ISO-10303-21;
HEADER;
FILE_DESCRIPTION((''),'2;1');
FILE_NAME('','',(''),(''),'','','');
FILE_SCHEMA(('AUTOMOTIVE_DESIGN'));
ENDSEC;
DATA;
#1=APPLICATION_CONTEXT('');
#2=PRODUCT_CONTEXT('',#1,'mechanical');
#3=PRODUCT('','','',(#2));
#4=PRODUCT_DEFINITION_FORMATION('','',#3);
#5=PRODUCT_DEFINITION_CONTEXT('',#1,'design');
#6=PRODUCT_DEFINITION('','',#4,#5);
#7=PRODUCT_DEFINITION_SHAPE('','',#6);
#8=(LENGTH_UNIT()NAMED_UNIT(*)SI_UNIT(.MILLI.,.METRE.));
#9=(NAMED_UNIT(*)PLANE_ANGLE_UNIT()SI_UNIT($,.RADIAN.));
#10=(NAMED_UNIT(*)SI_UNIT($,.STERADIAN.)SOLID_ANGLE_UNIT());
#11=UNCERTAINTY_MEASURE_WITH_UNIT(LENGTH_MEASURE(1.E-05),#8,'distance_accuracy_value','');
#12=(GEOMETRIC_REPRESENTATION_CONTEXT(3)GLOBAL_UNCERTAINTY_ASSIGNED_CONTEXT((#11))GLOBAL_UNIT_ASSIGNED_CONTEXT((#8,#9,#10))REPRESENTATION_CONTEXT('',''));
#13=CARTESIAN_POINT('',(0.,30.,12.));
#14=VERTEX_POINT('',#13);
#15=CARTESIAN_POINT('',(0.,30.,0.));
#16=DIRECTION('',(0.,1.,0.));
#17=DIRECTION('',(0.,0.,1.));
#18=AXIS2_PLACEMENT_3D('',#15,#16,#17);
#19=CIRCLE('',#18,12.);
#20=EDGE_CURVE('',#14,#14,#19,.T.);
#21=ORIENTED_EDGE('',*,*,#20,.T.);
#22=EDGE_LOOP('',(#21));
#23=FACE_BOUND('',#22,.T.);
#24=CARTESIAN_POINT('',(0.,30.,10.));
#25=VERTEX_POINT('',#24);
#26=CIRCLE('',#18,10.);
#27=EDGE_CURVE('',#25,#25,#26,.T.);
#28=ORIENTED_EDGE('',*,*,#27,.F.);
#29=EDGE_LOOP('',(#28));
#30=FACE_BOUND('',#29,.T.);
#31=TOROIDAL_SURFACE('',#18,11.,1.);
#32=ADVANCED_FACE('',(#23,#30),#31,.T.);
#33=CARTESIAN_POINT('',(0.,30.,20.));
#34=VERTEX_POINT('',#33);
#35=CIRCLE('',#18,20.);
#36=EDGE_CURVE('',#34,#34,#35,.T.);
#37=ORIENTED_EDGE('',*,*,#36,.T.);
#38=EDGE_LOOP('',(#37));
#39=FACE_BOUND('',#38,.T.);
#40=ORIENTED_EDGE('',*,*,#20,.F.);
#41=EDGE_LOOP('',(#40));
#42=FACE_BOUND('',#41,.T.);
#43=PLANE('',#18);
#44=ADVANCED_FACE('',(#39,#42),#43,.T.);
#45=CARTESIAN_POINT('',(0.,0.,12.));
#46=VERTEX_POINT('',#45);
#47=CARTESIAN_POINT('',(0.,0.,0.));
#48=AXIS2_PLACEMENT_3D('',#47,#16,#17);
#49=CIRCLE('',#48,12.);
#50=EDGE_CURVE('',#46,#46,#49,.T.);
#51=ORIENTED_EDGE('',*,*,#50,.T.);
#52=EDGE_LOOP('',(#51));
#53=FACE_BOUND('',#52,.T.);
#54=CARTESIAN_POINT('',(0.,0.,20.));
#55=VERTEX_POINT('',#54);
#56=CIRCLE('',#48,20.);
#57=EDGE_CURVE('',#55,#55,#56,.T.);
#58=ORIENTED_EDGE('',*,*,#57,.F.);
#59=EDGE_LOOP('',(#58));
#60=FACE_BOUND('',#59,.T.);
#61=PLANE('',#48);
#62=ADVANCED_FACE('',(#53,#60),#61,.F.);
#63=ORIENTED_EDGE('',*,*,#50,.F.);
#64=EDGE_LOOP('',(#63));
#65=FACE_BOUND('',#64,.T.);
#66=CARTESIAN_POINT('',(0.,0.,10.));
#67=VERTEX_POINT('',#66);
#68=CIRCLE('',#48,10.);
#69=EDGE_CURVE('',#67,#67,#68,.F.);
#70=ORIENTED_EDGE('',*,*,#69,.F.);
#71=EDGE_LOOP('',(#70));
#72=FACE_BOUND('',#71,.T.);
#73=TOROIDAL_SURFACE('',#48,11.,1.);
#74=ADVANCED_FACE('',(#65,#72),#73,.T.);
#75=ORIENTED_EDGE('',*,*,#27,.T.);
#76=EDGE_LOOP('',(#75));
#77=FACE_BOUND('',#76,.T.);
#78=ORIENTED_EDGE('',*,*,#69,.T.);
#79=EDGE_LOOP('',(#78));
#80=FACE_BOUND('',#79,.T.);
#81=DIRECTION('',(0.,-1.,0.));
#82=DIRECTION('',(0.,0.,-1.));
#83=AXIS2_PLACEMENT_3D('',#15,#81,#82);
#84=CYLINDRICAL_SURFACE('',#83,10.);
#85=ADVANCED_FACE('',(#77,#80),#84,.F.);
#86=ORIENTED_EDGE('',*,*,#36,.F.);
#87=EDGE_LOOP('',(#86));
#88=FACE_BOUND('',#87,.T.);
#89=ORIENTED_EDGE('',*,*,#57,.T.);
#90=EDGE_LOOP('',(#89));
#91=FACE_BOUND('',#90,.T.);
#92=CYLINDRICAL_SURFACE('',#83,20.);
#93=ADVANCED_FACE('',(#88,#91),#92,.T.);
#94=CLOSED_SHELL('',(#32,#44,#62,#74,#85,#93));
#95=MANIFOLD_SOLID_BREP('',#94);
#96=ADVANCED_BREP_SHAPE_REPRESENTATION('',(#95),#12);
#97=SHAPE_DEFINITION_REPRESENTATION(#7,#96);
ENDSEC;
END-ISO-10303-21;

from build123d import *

# Parameters (mm, degrees)
PROFILE_SKETCH_R              = 20
PROFILE_SKETCH_R_2            = 10
PROFILE_EXTRUDE_DEPTH         = 30
RING_LIP_PROFILE_R            = 12
RING_LIP_PROFILE_R_2          = 10
TOP_RING_LIP_EXTRUDE_DEPTH    = 1
BOTTOM_START                  = -31
SKETCH2_2_R                   = 12
SKETCH2_2_R_2                 = 10
BOTTOM_RING_LIP_EXTRUDE_DEPTH = 1
TOP_RING_LIP_FILLET_R         = 1
BOTTOM_RING_LIP_FILLET_R      = 1


with BuildPart() as part:
    # Profile Sketch → Profile Extrude (new body)
    with BuildSketch(Plane(origin=(0, 0, 0), x_dir=(1, 0, 0), z_dir=(0, 1, 0))):
        with Locations(Location((0, 0, 0), (0, 0, 270))):
            Circle(PROFILE_SKETCH_R)
        with Locations(Location((0, 0, 0), (0, 0, 270))):
            Circle(PROFILE_SKETCH_R_2, mode=Mode.SUBTRACT)
    extrude(amount=PROFILE_EXTRUDE_DEPTH)

    # Ring Lip Profile → Top Ring Lip Extrude (add)
    with BuildSketch(Plane(origin=(0, 30, 0), x_dir=(1, 0, 0), z_dir=(0, 1, 0))):
        with Locations(Location((0, 0, 0), (0, 0, 270))):
            Circle(RING_LIP_PROFILE_R)
        with Locations(Location((0, 0, 0), (0, 0, 270))):
            Circle(RING_LIP_PROFILE_R_2, mode=Mode.SUBTRACT)
    extrude(amount=TOP_RING_LIP_EXTRUDE_DEPTH)

    # Sketch2<2> → Bottom Ring Lip Extrude (add)
    with BuildSketch(Plane(origin=(0, 30, 0), x_dir=(1, 0, 0), z_dir=(0, 1, 0)).offset(BOTTOM_START)):
        with Locations(Location((0, 0, 0), (0, 0, 270))):
            Circle(SKETCH2_2_R)
        with Locations(Location((0, 0, 0), (0, 0, 270))):
            Circle(SKETCH2_2_R_2, mode=Mode.SUBTRACT)
    extrude(amount=BOTTOM_RING_LIP_EXTRUDE_DEPTH)

    # Top Ring Lip Fillet
    top_ring_lip_fillet_edges = [part.edges().sort_by_distance(p)[0] for p in [
        (0, -1, -12),
        (0, -1, -10),
    ]]
    fillet(top_ring_lip_fillet_edges, radius=TOP_RING_LIP_FILLET_R - 0.0001)  # a hair under: the kernel refuses the full size

    # Bottom Ring Lip Fillet
    bottom_ring_lip_fillet_edges = [part.edges().sort_by_distance(p)[0] for p in [
        (0, 31, -12),
        (0, 31, -10),
    ]]
    fillet(bottom_ring_lip_fillet_edges, radius=BOTTOM_RING_LIP_FILLET_R - 0.0001)  # a hair under: the kernel refuses the full size


solid = part.part
